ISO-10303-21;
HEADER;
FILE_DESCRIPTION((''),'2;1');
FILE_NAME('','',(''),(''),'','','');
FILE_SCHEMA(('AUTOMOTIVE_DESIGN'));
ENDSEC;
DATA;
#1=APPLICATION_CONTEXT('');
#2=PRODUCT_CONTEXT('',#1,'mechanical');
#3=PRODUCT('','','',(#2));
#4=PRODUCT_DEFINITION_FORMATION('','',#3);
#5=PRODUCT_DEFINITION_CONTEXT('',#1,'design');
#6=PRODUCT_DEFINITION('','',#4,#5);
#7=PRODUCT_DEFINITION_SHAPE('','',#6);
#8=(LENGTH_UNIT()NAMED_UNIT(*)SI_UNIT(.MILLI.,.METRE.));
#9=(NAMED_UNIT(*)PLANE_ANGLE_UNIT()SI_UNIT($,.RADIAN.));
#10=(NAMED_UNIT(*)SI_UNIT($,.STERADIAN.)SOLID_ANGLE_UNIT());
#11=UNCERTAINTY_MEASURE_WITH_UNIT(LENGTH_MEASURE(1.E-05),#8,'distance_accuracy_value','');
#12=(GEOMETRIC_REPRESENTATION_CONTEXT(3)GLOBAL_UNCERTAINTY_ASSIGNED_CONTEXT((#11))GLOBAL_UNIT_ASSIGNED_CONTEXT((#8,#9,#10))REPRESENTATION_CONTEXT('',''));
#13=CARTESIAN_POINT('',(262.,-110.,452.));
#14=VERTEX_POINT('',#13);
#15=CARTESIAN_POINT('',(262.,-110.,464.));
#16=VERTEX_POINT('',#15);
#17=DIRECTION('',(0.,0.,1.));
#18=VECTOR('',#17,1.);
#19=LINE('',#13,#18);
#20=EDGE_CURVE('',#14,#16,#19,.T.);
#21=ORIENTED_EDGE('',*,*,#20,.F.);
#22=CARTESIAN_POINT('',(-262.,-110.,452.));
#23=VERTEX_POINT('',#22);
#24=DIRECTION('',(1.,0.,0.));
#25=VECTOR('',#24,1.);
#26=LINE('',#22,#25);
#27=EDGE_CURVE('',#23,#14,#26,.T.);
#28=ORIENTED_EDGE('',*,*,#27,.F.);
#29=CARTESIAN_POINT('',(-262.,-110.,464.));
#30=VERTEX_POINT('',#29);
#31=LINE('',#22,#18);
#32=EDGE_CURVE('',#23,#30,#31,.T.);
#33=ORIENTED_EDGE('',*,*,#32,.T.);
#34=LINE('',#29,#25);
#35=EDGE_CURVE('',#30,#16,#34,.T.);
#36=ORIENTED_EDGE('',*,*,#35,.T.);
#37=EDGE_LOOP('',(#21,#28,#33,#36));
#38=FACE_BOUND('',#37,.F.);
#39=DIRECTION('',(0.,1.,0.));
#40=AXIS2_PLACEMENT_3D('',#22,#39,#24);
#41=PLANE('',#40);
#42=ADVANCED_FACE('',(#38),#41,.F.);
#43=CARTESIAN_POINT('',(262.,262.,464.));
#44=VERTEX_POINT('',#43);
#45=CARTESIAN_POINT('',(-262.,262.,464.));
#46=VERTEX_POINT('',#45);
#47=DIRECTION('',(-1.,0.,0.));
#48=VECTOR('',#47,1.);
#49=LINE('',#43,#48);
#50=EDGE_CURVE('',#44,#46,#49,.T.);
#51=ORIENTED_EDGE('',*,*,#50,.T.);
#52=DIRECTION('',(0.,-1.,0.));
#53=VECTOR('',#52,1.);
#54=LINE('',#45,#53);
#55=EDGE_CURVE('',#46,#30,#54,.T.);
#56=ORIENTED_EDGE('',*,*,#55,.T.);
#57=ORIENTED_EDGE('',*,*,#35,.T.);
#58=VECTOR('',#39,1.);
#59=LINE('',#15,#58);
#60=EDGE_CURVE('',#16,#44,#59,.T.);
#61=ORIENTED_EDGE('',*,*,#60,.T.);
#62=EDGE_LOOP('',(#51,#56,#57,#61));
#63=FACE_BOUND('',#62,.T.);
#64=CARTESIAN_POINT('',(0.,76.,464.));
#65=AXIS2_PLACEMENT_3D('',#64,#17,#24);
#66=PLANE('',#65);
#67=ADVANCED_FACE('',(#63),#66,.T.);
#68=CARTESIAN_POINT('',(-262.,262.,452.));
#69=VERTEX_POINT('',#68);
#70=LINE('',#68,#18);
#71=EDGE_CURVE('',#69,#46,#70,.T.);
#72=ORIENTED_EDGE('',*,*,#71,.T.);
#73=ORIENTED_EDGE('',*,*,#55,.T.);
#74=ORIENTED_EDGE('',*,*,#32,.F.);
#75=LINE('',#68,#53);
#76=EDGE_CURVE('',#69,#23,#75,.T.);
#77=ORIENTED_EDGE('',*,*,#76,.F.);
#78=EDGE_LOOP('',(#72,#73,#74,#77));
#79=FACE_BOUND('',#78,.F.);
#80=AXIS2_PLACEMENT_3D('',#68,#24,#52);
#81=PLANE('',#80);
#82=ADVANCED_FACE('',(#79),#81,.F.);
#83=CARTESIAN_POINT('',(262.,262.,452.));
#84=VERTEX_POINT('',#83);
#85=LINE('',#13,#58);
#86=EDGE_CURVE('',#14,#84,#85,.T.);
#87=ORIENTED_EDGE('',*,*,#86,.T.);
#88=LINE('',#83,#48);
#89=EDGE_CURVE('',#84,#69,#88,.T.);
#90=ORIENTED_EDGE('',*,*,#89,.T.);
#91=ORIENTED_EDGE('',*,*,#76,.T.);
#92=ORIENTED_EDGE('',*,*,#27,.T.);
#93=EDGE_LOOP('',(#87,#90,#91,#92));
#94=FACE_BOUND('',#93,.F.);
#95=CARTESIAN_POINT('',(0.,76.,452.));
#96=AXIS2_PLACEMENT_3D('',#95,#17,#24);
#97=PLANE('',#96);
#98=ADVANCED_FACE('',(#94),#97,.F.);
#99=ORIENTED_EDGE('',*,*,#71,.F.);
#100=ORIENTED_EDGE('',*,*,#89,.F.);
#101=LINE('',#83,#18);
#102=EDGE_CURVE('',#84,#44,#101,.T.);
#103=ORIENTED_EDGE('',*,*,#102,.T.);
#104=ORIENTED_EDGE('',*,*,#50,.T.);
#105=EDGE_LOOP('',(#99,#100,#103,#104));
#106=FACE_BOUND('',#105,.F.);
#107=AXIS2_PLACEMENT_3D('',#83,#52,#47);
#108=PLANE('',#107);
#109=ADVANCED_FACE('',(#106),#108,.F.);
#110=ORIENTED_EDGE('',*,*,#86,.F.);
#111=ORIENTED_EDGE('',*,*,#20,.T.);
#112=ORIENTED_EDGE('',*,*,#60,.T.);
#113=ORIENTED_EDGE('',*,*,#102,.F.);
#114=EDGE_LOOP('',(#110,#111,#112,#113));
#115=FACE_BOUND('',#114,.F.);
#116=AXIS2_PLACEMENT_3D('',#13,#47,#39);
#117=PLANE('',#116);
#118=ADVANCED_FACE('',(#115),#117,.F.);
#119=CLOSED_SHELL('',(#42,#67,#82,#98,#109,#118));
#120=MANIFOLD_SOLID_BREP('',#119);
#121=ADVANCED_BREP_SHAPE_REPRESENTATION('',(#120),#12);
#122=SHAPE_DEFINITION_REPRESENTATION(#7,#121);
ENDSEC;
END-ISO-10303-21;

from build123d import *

# Parameters (mm, degrees)
F0_W      = 500
F0_H      = 500
F1_DEPTH  = 12
F2_W      = 500
F2_H      = 50
F3_DEPTH  = 6
F6_DEPTH  = 6
F14_DEPTH = 6
F15_R     = 19.99999
F19_DEPTH = 6
F22_DEPTH = 12
F25_DEPTH = 6
F27_W     = 12
F27_H     = 320
F28_DEPTH = 44
F31_W     = 196
F31_H     = 12
F32_DEPTH = 44
F37_DEPTH = 3
F43_DEPTH = 12


# Not quite as in the source:
# - a fillet or chamfer is up to 0.001 mm smaller than in the source, because OpenCascade refuses the exact size


with BuildPart() as f1:
    # F0 (on Top) → F1 (new body)
    with BuildSketch(Plane.XY):
        Rectangle(F0_W, F0_H)
    extrude(amount=F1_DEPTH)


with BuildPart() as f3:
    # F2 (on Right) → F3 (new body, symmetric)
    with BuildSketch(Plane.YZ):
        Rectangle(F2_W, F2_H)
    extrude(amount=F3_DEPTH, both=True)


with BuildPart() as f3_1:
    # F4: moved
    add(f3.part.moved(Location((0, 0, -25))))


with BuildPart() as f6:
    # F5 (on Front) → F6 (new body, symmetric)
    with BuildSketch(Plane.XZ):
        Polygon((-250, -25), (250, -25), (250, 25), (6, 25), (6, 0), (-6, 0), (-6, 25), (-250, 25), align=None)
    extrude(amount=F6_DEPTH, both=True)


with BuildPart() as f6_1:
    # F7: moved
    add(f6.part.moved(Location((0, 80, -25))))


with BuildPart() as f8_1:
    # F8: copy of F6
    add(f6_1.part)


with BuildPart() as f3_2:
    add(f3_1.part)

    # F10: cut F6
    add(f6_1.part, mode=Mode.SUBTRACT)


with BuildPart() as f11_1:
    # F11: copy of F6
    add(f6_1.part.moved(Location((0, 164, 0))))


with BuildPart() as f3_3:
    add(f3_2.part)

    # F12: cut F11_1
    add(f11_1.part, mode=Mode.SUBTRACT)


with BuildPart() as f14:
    # F13 (on Right) → F14 (new body, symmetric)
    with BuildSketch(Plane.YZ):
        Polygon((250, -50), (250, 0), (250, 452), (70, 452), (-110, 452), (-250, 100), (-250, -50), align=None)
        Polygon((0, 412), (70, 412), (140, 412), (140, 372), (0, 372), align=None, mode=Mode.SUBTRACT)
    extrude(amount=F14_DEPTH, both=True)

    # F15 (radius 20 in the source; OpenCascade refuses exactly that, so slightly less here)
    f15_edges = [f14.edges().sort_by_distance(p)[0] for p in [
        (0, 140, 372),
        (0, 140, 412),
        (0, 0, 412),
        (0, 0, 372),
    ]]
    fillet(f15_edges, radius=F15_R)


with BuildPart() as f14_1:
    # F16: moved
    add(f14.part.moved(Location((-256, 0, 0))))


with BuildPart() as f17_1:
    # F17: copy of F14
    add(f14_1.part.moved(Location((512, 0, 0))))


with BuildPart() as f19:
    # F18 (on Front) → F19 (new body, symmetric)
    with BuildSketch(Plane.XZ):
        Polygon((-262, 452), (-262, 0), (-262, -50), (262, -50), (262, 452), align=None)
    extrude(amount=F19_DEPTH, both=True)


with BuildPart() as f19_1:
    # F20: moved
    add(f19.part.moved(Location((0, 256, 0))))


with BuildPart() as f22:
    # F21 (on face) → F22 (new body)
    with BuildSketch(Plane.XY.offset(12)):
        Polygon((262, 262), (0, 262), (-262, 262), (-262, -110), (262, -110), align=None)
    extrude(amount=F22_DEPTH)


with BuildPart() as f22_1:
    # F23: moved
    add(f22.part.moved(Location((0, 0, 440))))


with BuildPart() as f25:
    # F24 (on Front) → F25 (new body, symmetric)
    with BuildSketch(Plane.XZ):
        Polygon((-250, 12), (0, 12), (250, 12), (250, 100), (-250, 100), align=None)
    extrude(amount=F25_DEPTH, both=True)


with BuildPart() as f25_1:
    # F26: moved
    add(f25.part.moved(Location((0, -244, 0))))


with BuildPart() as f28:
    # F27 (on Top) → F28 (new body)
    with BuildSketch(Plane.XY):
        with Locations((-24, -90)):
            Rectangle(F27_W, F27_H)
    extrude(amount=F28_DEPTH)


with BuildPart() as f28_1:
    # F29: moved
    add(f28.part.moved(Location((0, 0, -48))))


with BuildPart() as f30_1:
    # F30: copy of F28
    add(f28_1.part.moved(Location((-208, 0, 0))))


with BuildPart() as f32:
    # F31 (on Top) → F32 (new body)
    with BuildSketch(Plane.XY):
        with Locations((-128, -244)):
            Rectangle(F31_W, F31_H)
    extrude(amount=-F32_DEPTH)


with BuildPart() as f32_1:
    # F33: moved
    add(f32.part.moved(Location((0, 0, -4))))


with BuildPart() as f34_1:
    # F34: copy of F32
    add(f32_1.part.moved(Location((0, 308, 0))))


with BuildPart() as f35_1:
    # F35: copy of F32
    add(f32_1.part.moved(Location((256, 0, 0))))


with BuildPart() as f35_2:
    # F35: copy of F30_1
    add(f30_1.part.moved(Location((256, 0, 0))))


with BuildPart() as f35_3:
    # F35: copy of F28
    add(f28_1.part.moved(Location((256, 0, 0))))


with BuildPart() as f35_4:
    # F35: copy of F34_1
    add(f34_1.part.moved(Location((256, 0, 0))))


with BuildPart() as f37:
    # F36 (on Top) → F37 (new body)
    with BuildSketch(Plane.XY):
        Polygon((-24, -244), (-24, 0), (-24, 64), (-232, 64), (-232, -244), align=None)
    extrude(amount=F37_DEPTH)


with BuildPart() as f37_1:
    # F38: moved
    add(f37.part.moved(Location((0, 0, -44))))


with BuildPart() as f39_1:
    # F39: copy of F37
    add(f37_1.part.moved(Location((256, 0, 0))))


with BuildPart() as f30_1_1:
    add(f30_1.part)

    # F40: cut F37
    add(f37_1.part, mode=Mode.SUBTRACT)


with BuildPart() as f32_2:
    add(f32_1.part)

    # F40: cut F37
    add(f37_1.part, mode=Mode.SUBTRACT)


with BuildPart() as f28_2:
    add(f28_1.part)

    # F40: cut F37
    add(f37_1.part, mode=Mode.SUBTRACT)


with BuildPart() as f34_1_1:
    add(f34_1.part)

    # F40: cut F37
    add(f37_1.part, mode=Mode.SUBTRACT)


with BuildPart() as f35_1_1:
    add(f35_1.part)

    # F41: cut F39_1
    add(f39_1.part, mode=Mode.SUBTRACT)


with BuildPart() as f35_3_1:
    add(f35_3.part)

    # F41: cut F39_1
    add(f39_1.part, mode=Mode.SUBTRACT)


with BuildPart() as f35_4_1:
    add(f35_4.part)

    # F41: cut F39_1
    add(f39_1.part, mode=Mode.SUBTRACT)


with BuildPart() as f35_2_1:
    add(f35_2.part)

    # F41: cut F39_1
    add(f39_1.part, mode=Mode.SUBTRACT)


with BuildPart() as f43:
    # F42 (on Front) → F43 (new body)
    with BuildSketch(Plane.XZ):
        Polygon((0, 12), (0, 0), (0, -50), (262, -50), (262, 12), align=None)
    extrude(amount=F43_DEPTH)


with BuildPart() as f43_1:
    # F44: moved
    add(f43.part.moved(Location((0, -250, 0))))


with BuildPart() as f45_1:
    # F45: copy of F43
    add(f43_1.part.moved(Location((-262, 0, 0))))


solid = f22_1.part
